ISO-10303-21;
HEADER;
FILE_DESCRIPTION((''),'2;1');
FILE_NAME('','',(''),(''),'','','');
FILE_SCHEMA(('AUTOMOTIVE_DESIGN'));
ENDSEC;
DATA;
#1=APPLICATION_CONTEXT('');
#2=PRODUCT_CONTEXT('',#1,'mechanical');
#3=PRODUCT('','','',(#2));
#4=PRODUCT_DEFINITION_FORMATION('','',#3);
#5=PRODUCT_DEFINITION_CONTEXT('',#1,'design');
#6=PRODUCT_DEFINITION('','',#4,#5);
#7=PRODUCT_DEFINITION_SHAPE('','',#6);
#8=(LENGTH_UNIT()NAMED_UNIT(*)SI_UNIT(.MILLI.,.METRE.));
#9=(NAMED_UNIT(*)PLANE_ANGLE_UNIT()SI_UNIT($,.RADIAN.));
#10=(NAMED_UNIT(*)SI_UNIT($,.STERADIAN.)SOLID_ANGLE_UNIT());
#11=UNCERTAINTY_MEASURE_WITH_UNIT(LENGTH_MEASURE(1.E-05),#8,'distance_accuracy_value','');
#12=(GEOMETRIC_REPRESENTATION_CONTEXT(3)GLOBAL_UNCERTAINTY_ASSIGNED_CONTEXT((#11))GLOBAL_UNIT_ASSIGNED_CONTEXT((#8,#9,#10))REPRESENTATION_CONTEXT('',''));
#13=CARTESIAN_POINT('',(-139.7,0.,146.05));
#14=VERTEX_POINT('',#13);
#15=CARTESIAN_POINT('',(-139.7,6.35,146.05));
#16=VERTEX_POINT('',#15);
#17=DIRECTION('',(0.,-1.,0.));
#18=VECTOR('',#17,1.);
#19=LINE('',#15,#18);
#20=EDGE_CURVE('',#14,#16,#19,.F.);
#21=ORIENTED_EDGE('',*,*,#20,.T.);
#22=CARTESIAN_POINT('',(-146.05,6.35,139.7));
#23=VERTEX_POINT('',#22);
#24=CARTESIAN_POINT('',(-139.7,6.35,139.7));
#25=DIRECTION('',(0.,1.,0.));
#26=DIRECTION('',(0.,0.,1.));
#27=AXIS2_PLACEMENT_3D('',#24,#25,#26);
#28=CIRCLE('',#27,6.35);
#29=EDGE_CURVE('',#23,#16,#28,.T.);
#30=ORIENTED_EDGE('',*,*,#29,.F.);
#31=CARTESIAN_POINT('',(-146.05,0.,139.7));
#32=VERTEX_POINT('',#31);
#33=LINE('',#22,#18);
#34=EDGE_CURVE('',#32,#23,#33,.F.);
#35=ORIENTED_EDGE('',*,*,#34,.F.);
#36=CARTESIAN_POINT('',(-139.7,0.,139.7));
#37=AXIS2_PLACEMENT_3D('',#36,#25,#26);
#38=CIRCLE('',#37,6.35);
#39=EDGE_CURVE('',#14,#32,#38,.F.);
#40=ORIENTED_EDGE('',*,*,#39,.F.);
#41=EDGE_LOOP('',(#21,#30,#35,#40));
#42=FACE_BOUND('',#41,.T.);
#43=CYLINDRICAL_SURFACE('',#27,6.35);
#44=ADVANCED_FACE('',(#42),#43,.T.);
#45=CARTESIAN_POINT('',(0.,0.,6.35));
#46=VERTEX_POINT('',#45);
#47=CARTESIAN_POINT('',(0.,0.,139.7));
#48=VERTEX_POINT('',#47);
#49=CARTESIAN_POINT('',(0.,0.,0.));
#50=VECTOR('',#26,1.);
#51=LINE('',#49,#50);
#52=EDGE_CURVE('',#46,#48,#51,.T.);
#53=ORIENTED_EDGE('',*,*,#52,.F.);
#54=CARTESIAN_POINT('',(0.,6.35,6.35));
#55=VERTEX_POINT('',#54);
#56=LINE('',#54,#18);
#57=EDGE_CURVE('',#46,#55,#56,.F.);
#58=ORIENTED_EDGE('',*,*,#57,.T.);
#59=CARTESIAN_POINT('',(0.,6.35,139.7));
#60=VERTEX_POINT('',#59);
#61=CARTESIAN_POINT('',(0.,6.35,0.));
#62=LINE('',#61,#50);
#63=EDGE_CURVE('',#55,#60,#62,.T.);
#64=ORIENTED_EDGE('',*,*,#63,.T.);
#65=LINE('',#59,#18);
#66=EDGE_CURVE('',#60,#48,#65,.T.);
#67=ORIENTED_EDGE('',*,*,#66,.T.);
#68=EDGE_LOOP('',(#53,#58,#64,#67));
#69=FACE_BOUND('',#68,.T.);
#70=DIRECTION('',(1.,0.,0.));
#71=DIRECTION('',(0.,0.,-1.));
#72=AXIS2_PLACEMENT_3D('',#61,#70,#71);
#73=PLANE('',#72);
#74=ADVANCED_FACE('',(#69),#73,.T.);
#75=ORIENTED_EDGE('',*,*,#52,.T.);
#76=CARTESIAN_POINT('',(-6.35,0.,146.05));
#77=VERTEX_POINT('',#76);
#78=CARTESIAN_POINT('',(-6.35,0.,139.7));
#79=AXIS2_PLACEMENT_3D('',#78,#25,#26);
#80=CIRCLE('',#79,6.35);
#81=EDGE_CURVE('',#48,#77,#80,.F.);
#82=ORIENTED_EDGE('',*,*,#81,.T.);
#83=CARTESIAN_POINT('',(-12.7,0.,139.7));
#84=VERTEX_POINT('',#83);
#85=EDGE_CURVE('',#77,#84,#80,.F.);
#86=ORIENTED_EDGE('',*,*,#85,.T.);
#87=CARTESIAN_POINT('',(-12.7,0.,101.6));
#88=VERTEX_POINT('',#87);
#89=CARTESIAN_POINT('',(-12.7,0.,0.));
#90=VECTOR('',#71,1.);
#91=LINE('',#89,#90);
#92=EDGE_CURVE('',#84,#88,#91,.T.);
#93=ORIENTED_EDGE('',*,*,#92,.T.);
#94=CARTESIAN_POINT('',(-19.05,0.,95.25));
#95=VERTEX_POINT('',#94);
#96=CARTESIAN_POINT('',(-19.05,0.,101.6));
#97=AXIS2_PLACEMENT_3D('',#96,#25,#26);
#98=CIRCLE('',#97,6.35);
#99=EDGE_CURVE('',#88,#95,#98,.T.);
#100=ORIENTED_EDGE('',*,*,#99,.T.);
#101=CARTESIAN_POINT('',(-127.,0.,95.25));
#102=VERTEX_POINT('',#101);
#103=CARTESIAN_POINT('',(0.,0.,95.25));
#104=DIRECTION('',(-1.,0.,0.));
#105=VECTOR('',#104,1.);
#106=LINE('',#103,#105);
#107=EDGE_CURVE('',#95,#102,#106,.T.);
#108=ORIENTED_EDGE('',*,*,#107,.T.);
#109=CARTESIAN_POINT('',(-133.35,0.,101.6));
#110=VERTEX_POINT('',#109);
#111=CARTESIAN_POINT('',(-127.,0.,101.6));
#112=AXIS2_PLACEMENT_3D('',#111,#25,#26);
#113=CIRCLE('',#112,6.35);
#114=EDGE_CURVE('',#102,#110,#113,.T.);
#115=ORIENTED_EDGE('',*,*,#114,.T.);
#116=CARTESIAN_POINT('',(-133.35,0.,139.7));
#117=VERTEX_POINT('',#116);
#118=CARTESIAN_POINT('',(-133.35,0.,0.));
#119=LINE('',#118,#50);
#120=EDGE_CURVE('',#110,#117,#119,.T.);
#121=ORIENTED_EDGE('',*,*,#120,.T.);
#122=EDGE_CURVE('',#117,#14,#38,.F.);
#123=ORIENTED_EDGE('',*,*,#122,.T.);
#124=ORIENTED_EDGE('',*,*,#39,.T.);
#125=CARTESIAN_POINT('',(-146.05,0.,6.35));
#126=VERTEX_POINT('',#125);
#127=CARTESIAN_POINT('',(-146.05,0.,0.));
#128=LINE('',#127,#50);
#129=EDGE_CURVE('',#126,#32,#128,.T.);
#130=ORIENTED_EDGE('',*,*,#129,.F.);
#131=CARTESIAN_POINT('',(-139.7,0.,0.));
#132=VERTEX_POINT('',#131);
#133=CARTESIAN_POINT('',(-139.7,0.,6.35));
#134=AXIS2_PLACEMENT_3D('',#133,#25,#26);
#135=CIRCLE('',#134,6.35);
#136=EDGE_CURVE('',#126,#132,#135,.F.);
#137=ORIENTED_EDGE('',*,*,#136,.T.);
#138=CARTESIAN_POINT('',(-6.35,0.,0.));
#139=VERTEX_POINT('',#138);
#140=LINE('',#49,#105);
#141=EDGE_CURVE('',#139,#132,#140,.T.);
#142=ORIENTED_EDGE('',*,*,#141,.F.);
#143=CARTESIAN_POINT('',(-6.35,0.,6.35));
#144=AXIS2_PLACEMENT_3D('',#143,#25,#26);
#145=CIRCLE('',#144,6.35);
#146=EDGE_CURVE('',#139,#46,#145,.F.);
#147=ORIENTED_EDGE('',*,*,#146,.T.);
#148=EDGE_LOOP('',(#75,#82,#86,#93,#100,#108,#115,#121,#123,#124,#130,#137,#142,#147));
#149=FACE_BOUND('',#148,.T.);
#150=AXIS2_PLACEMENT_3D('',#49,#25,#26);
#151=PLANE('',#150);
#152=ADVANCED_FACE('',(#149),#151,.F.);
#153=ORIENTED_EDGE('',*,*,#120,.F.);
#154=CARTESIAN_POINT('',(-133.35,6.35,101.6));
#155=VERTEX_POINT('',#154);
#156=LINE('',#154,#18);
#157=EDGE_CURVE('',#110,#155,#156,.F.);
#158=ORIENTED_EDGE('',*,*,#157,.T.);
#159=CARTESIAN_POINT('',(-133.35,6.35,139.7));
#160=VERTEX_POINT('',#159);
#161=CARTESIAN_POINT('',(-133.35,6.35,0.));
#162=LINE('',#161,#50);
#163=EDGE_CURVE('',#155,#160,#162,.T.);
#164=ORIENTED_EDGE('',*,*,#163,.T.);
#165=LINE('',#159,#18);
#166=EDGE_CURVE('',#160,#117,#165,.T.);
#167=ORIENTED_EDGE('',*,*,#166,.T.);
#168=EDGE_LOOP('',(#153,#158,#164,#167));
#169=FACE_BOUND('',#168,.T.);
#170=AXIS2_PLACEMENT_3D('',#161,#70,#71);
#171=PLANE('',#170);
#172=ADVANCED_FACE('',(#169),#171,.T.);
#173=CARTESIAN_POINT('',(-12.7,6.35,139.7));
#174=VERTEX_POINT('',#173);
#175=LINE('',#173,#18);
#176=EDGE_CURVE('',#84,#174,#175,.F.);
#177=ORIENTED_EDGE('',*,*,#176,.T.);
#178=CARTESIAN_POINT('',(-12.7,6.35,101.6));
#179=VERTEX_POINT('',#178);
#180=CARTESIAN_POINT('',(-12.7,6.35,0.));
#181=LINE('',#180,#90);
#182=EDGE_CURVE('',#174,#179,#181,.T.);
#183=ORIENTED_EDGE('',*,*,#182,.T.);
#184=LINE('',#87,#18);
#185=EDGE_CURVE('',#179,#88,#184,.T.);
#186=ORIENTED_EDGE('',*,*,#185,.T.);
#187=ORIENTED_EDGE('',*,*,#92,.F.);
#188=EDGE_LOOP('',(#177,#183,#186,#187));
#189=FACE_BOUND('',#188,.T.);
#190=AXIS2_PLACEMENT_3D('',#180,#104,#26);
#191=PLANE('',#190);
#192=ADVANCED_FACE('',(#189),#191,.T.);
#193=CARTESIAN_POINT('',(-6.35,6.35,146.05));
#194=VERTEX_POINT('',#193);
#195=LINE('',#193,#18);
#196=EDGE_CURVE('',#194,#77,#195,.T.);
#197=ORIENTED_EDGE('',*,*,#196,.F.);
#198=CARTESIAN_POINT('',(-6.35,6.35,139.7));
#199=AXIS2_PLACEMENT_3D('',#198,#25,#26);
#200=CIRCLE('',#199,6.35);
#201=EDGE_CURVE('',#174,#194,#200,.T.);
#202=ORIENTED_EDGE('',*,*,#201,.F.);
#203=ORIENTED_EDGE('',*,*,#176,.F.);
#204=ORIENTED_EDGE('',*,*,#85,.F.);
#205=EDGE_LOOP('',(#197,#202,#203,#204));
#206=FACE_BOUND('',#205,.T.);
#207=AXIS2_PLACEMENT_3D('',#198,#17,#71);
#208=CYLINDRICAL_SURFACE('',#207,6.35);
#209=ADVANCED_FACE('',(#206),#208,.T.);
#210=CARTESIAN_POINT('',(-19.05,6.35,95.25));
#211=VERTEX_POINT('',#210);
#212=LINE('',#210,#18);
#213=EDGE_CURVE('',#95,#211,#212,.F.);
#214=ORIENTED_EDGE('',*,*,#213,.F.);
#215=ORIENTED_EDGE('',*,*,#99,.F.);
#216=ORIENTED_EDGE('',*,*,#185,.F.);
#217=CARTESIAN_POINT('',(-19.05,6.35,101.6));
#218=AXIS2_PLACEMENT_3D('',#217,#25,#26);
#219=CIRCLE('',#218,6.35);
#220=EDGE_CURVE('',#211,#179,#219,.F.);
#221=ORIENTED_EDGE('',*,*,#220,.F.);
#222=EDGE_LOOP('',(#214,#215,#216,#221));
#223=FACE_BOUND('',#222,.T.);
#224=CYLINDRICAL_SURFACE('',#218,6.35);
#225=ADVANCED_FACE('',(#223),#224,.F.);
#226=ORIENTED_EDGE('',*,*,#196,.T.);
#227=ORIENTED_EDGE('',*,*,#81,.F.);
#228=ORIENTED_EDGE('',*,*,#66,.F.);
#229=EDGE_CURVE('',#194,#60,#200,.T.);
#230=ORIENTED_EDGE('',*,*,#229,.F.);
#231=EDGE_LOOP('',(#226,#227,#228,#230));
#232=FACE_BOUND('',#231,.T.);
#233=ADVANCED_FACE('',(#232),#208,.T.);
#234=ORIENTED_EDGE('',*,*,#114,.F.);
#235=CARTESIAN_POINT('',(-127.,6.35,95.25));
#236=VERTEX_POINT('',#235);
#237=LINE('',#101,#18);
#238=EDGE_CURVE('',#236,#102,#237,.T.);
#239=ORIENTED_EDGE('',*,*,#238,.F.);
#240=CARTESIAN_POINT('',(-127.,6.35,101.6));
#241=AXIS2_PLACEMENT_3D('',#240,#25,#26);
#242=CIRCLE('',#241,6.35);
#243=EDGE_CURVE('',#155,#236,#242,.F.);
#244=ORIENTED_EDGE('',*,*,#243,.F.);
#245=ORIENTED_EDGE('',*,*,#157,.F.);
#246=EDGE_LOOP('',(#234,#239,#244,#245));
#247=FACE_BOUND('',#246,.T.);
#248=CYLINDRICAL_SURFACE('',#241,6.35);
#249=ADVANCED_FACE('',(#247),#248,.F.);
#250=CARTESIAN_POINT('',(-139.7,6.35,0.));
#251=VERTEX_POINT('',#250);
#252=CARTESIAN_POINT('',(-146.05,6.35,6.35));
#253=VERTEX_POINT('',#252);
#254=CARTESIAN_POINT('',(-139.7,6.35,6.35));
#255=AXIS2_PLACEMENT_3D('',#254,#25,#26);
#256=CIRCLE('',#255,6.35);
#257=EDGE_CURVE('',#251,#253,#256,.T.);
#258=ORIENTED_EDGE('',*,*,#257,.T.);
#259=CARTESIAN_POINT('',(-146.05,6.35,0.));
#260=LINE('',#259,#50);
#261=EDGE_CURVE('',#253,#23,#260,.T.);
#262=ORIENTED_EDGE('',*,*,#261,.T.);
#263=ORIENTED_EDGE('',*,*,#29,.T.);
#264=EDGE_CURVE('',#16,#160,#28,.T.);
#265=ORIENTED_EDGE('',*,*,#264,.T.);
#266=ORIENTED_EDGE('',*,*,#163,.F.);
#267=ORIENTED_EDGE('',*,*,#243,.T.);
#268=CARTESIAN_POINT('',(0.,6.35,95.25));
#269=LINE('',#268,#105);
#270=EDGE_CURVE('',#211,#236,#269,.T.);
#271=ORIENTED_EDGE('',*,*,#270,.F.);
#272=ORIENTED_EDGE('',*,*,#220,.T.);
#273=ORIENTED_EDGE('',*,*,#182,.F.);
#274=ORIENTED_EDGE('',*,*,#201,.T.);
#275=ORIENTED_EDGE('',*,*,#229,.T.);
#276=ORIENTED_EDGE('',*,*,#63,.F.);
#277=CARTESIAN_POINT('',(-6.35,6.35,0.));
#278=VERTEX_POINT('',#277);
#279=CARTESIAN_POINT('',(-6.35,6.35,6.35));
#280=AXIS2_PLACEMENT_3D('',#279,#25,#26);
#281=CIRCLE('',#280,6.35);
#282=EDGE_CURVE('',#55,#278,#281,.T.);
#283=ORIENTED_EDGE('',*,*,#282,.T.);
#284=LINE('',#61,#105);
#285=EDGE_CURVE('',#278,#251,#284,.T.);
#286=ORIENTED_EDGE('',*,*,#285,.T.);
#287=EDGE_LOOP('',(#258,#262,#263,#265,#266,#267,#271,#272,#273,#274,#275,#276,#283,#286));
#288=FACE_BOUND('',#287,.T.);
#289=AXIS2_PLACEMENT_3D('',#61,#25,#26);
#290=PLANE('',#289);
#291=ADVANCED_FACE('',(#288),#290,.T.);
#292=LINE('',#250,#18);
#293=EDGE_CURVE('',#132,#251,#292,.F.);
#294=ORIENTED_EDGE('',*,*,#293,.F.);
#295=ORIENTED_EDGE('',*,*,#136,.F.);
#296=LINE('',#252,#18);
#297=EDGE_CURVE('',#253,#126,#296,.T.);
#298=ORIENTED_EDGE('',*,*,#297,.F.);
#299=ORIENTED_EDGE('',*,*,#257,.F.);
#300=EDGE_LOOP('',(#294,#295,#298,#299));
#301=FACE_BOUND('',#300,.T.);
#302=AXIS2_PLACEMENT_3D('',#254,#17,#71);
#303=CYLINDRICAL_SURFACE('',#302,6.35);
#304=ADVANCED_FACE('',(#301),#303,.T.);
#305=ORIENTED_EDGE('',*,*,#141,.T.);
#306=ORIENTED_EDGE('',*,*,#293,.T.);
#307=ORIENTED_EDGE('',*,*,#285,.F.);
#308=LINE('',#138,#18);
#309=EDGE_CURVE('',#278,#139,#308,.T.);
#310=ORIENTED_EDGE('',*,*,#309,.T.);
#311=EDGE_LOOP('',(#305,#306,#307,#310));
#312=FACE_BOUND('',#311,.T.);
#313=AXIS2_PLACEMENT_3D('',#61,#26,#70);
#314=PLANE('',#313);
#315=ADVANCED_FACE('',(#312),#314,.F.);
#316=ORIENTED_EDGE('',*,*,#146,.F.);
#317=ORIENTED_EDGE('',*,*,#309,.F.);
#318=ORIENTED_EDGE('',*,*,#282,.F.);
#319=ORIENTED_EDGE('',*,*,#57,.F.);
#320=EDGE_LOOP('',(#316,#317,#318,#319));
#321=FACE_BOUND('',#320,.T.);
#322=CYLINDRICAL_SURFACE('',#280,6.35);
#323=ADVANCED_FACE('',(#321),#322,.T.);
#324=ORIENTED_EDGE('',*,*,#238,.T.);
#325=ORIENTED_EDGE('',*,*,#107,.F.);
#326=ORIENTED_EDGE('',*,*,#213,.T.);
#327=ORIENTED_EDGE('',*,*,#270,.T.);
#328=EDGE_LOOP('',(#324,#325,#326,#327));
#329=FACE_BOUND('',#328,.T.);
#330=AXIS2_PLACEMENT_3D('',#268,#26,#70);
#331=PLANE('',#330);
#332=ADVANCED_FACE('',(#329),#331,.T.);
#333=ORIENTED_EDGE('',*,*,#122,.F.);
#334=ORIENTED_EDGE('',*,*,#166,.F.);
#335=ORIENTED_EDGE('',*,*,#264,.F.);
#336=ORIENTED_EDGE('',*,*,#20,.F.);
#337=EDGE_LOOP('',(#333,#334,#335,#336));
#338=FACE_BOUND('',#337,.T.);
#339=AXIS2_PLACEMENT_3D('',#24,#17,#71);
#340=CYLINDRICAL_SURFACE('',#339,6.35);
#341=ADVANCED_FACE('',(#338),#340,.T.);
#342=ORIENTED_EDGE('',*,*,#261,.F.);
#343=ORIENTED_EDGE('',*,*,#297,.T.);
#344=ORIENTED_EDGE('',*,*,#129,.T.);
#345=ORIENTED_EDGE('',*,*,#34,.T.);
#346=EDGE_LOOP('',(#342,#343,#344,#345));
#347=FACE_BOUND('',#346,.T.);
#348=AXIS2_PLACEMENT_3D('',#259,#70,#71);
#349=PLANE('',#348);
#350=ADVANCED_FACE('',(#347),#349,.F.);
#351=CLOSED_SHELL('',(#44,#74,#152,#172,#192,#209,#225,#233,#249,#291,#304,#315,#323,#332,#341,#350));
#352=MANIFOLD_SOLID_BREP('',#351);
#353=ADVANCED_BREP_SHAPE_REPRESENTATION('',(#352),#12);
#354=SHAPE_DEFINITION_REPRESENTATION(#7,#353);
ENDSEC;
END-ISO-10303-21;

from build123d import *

# Parameters (mm, degrees)
BOSS_EXTRUDE1_DEPTH = 6.35
FILLET1_R           = 6.35


with BuildPart() as part:
    # Sketch1 → Boss-Extrude1 (new body)
    with BuildSketch(Plane(origin=(0, 0, 0), x_dir=(1, 0, 0), z_dir=(0, 1, 0))):
        Polygon((-133.35, -146.05), (-146.05, -146.05), (-146.05, 0), (0, 0), (0, -146.05), (-12.7, -146.05), (-12.7, -95.25), (-133.35, -95.25), align=None)
    extrude(amount=BOSS_EXTRUDE1_DEPTH)

    # Fillet1
    fillet1_edges = [part.edges().sort_by_distance(p)[0] for p in [
        (-12.7, 3.175, 95.25),
        (-133.35, 3.175, 95.25),
        (0, 3.175, 146.05),
        (-146.05, 3.175, 0),
        (0, 3.175, 0),
        (-12.7, 3.175, 146.05),
        (-146.05, 3.175, 146.05),
        (-133.35, 3.175, 146.05),
    ]]
    fillet(fillet1_edges, radius=FILLET1_R - 0.0001)  # a hair under: the kernel refuses the full size


solid = part.part
